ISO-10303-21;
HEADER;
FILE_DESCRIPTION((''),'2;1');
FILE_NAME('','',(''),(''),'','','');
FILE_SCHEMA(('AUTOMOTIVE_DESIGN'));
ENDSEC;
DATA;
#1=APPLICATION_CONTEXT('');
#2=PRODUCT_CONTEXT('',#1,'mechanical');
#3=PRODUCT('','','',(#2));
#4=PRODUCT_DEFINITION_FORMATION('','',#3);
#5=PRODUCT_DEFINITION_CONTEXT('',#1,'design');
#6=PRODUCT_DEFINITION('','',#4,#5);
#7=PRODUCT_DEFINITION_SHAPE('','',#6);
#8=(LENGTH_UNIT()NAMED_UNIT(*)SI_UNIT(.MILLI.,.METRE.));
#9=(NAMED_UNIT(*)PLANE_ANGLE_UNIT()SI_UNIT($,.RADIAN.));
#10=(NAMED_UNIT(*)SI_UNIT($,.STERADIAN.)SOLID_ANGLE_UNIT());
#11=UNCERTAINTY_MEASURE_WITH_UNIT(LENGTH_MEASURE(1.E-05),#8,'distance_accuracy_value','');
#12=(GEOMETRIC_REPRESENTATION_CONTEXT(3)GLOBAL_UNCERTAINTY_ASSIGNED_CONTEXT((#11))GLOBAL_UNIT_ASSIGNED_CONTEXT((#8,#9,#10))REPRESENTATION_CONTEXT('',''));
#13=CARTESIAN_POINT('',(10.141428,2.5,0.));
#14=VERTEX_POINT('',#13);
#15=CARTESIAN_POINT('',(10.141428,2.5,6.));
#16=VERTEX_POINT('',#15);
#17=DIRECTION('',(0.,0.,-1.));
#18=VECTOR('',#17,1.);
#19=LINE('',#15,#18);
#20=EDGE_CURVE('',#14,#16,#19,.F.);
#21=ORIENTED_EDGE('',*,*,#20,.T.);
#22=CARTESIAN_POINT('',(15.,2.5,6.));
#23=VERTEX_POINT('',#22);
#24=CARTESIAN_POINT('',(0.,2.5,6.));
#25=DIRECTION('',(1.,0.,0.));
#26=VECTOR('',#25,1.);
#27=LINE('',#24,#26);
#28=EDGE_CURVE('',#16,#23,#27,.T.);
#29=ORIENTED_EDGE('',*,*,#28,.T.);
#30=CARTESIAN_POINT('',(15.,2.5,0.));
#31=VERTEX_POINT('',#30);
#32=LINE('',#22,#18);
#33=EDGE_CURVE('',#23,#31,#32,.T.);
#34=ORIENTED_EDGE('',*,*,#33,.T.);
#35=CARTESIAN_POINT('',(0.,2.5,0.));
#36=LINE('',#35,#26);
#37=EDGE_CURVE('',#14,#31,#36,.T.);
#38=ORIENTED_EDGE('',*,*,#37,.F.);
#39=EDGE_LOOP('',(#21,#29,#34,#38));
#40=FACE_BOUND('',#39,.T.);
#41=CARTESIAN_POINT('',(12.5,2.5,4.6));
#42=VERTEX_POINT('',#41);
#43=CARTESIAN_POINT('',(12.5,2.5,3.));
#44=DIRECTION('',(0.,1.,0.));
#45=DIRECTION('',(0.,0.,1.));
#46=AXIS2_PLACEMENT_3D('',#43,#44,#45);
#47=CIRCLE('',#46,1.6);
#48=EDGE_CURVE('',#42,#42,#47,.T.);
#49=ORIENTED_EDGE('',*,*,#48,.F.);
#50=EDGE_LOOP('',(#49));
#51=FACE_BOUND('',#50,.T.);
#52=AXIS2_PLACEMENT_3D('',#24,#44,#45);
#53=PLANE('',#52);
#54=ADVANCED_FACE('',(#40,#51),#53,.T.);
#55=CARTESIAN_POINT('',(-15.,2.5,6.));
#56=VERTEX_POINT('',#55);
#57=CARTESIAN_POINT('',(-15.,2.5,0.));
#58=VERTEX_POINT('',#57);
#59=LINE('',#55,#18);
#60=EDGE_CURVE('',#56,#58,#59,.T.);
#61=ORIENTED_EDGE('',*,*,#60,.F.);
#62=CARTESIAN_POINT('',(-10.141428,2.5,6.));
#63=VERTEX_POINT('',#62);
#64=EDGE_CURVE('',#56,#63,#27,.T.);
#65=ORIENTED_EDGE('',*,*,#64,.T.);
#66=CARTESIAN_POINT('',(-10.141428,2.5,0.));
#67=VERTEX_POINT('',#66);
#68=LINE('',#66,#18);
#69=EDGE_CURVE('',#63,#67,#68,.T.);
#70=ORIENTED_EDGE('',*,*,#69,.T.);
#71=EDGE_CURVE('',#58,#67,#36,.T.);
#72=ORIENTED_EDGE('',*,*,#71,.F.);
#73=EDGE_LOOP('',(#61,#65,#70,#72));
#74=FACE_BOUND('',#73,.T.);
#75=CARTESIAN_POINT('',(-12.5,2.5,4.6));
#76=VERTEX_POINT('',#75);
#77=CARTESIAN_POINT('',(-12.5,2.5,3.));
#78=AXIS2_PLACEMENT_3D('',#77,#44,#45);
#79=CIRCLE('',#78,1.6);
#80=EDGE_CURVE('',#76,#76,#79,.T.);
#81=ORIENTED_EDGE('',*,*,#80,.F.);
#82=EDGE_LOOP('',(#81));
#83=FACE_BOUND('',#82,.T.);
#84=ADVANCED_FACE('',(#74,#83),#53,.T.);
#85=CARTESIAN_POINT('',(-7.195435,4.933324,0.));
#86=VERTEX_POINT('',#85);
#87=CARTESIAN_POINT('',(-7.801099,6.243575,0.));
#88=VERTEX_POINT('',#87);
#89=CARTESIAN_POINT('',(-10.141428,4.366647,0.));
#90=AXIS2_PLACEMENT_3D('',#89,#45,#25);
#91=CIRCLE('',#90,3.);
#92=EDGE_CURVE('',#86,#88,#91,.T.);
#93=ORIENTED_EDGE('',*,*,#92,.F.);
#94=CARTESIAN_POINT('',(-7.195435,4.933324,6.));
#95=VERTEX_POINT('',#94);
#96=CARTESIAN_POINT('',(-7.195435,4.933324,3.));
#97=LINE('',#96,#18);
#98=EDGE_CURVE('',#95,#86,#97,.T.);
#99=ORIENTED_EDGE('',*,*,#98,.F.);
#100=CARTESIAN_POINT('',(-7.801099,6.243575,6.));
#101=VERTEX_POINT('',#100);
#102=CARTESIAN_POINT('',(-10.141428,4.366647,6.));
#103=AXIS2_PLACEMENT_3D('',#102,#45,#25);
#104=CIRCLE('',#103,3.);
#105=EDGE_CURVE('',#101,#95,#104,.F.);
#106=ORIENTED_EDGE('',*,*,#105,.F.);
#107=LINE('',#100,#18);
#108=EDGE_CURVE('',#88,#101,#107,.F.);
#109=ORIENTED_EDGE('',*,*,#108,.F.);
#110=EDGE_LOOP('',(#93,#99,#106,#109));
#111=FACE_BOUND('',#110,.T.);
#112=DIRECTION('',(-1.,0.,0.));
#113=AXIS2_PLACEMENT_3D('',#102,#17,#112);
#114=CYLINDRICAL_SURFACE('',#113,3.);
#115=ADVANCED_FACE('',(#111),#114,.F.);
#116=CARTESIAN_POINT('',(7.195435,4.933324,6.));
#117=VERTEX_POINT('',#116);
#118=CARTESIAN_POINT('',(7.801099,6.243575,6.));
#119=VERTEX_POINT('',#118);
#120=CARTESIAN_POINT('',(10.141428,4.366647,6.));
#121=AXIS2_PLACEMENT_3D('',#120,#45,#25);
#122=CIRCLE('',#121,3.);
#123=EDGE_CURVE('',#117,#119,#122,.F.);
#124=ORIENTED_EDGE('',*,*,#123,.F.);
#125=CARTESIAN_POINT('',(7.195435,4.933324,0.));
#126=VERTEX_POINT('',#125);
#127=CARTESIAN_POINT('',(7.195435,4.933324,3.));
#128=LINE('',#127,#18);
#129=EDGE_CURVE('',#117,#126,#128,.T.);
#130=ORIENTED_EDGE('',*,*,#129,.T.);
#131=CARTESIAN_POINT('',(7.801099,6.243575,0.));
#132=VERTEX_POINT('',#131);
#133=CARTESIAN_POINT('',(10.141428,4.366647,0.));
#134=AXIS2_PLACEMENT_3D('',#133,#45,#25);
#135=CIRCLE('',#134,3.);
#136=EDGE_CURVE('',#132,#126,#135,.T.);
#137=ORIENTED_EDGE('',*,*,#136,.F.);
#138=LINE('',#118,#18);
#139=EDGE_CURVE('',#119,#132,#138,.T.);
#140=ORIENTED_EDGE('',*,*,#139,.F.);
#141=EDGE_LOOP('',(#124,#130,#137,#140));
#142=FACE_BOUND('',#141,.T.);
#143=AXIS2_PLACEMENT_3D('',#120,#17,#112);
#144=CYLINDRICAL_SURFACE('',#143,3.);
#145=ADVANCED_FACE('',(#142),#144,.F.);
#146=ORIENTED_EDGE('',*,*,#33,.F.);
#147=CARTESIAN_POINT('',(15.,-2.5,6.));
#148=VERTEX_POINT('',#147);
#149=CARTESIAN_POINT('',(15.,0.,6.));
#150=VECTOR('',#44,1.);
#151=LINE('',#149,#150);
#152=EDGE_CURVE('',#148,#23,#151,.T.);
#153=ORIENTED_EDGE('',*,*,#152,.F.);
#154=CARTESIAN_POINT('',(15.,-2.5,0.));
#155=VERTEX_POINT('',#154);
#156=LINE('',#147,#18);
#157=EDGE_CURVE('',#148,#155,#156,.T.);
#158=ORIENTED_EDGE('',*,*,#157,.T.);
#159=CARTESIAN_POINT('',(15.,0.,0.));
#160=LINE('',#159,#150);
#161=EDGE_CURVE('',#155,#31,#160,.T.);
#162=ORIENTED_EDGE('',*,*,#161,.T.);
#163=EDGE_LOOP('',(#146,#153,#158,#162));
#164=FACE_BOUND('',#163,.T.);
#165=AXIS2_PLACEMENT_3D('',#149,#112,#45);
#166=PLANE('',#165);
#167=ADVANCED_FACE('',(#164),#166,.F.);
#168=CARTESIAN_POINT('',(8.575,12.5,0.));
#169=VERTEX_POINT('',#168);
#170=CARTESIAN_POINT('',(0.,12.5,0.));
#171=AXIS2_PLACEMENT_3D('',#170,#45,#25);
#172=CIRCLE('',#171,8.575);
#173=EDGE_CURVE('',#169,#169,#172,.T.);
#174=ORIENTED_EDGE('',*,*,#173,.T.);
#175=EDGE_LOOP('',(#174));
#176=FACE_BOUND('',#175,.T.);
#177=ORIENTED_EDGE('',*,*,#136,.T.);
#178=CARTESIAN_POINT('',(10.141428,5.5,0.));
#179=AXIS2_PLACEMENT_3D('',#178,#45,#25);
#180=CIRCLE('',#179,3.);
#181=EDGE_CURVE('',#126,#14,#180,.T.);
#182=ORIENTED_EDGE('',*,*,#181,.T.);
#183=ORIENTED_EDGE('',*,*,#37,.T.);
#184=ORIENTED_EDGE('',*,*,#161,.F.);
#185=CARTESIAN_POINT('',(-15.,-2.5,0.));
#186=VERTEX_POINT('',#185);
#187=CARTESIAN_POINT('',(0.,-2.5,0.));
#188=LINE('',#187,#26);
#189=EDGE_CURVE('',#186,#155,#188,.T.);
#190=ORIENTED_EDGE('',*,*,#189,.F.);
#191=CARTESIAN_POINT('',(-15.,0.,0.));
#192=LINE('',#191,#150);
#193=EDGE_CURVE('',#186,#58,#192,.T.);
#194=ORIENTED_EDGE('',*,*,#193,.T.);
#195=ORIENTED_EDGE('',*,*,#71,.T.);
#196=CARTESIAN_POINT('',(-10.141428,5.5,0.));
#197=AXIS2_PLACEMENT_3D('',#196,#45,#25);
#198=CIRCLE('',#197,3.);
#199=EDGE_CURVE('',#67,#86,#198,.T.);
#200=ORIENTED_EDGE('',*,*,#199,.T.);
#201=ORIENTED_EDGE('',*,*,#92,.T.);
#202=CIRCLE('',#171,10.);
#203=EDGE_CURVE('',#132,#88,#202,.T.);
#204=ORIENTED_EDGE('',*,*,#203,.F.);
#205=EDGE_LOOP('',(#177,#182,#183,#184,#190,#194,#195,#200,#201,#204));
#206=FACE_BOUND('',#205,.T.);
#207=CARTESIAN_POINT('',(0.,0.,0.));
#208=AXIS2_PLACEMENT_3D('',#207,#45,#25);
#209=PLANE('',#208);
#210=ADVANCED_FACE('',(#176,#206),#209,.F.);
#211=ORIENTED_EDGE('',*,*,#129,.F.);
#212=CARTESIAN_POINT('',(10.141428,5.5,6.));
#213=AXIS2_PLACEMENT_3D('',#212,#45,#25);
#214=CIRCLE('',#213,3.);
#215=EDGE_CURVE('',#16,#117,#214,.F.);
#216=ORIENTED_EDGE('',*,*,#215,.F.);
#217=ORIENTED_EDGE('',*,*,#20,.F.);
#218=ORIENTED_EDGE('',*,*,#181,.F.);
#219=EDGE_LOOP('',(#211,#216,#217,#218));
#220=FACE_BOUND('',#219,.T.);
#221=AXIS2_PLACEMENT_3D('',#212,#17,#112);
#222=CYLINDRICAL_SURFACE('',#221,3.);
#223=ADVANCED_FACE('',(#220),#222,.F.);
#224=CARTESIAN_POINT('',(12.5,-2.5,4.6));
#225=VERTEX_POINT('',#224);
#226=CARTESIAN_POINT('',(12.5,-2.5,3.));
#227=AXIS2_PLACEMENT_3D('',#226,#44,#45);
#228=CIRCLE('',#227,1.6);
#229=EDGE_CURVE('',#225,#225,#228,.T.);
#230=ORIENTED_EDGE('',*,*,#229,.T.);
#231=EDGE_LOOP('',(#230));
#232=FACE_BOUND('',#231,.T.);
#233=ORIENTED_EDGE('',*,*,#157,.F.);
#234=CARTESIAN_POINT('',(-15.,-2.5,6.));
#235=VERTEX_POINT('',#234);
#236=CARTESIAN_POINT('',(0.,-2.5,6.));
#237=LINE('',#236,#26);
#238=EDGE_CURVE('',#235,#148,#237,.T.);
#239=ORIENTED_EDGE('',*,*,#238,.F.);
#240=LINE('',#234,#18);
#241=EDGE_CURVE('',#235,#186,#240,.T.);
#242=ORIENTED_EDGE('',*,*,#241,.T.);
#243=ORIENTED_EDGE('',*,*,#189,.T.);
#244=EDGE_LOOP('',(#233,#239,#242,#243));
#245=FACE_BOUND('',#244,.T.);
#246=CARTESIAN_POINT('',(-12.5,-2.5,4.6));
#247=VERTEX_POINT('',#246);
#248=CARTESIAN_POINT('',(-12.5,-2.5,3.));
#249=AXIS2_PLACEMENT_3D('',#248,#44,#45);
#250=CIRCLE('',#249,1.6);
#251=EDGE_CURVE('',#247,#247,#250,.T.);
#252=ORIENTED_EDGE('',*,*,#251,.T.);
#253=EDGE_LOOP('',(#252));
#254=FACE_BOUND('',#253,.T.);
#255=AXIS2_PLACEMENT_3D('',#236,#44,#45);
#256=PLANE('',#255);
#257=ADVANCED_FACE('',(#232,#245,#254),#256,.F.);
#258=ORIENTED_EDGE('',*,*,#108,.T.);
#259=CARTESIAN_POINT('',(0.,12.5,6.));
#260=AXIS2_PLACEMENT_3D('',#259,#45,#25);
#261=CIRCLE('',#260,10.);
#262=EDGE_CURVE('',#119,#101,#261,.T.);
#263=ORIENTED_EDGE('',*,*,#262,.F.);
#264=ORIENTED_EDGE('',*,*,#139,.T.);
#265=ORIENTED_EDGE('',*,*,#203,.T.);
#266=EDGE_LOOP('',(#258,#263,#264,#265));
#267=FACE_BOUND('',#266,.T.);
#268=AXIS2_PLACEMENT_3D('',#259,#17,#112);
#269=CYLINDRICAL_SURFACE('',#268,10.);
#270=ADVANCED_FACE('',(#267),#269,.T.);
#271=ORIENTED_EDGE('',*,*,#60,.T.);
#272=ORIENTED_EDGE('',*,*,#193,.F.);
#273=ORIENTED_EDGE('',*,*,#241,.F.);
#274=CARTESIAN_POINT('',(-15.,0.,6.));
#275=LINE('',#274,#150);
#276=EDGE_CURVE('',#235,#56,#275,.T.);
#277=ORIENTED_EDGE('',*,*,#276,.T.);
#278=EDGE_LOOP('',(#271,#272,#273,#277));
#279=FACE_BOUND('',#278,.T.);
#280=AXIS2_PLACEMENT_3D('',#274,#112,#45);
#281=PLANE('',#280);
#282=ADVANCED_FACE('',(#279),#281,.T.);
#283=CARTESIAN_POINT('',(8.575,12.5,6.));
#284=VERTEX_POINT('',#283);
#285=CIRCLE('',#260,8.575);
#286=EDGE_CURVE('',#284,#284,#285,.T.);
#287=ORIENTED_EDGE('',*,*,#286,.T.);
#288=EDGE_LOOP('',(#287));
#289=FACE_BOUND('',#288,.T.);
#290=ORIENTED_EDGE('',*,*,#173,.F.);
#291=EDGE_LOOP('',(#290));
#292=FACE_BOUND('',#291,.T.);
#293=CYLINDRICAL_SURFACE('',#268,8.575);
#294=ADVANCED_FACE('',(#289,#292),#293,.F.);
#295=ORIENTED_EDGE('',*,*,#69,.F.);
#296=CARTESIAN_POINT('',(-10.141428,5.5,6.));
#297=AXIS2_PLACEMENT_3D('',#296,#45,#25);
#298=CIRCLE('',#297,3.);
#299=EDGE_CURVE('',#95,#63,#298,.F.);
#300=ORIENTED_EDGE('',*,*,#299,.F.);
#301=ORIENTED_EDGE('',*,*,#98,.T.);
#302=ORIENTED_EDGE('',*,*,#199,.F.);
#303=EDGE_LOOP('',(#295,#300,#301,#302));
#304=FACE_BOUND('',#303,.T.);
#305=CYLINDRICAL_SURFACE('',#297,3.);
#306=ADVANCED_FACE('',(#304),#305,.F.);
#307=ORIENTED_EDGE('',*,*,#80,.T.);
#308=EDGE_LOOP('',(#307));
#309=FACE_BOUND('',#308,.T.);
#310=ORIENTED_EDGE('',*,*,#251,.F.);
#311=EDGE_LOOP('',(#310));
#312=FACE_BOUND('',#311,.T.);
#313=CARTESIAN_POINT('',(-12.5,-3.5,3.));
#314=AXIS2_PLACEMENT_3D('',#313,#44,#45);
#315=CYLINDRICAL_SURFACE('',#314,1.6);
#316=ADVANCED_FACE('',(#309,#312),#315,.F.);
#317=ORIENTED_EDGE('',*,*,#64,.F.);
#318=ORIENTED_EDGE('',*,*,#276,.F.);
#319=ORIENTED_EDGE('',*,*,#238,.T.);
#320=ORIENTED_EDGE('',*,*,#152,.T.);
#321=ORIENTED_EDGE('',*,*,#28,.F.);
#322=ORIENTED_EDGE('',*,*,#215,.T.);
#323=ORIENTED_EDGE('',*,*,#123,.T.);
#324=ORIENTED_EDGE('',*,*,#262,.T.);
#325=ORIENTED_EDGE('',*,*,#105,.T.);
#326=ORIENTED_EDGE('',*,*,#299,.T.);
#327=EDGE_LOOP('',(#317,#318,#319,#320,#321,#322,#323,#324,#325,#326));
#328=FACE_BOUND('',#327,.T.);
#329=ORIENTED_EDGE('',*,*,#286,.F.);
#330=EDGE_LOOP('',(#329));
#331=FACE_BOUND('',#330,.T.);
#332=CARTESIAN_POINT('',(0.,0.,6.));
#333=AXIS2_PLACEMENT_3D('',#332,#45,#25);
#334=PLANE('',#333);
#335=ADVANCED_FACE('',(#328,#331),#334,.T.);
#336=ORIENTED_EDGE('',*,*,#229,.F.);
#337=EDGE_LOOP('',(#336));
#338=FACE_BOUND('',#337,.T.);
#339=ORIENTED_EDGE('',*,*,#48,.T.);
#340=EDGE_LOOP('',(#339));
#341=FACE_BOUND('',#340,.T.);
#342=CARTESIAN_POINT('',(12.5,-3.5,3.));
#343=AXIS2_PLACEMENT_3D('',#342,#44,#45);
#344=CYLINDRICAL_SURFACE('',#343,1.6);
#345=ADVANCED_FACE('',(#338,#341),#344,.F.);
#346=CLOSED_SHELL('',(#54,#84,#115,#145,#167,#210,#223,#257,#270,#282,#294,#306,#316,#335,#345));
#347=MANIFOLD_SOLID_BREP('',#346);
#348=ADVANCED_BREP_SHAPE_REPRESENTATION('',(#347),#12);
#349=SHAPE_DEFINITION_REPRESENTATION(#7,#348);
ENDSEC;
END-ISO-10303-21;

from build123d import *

# Parameters (mm, degrees)
IZIM1_R                     = 10
IZIM1_R_2                   = 8.575
IZIM1_W                     = 30
IZIM1_H                     = 5
Y_KSEKLIK_EKSTR_ZYON1_DEPTH = 6
RADYUS1_R                   = 3
IZIM3_R                     = 1.6
KES_EKSTR_ZYON1_DEPTH       = 6
IZIM2_R                     = 1.6
KES_EKSTR_ZYON2_DEPTH       = 6


with BuildPart() as part:
    # Çizim1 → Yükseklik-Ekstrüzyon1 (new body)
    # profile 1 of 4: a face of its own
    with BuildSketch(Plane.XY):
        with Locations((0, 12.5)):
            Circle(IZIM1_R)
        with Locations((0, 12.5)):
            Circle(IZIM1_R_2, mode=Mode.SUBTRACT)
    # profile 2 of 4: a face of its own
    with BuildSketch(Plane.XY):
        with BuildLine():
            ThreePointArc((7.141428429, 5.5), (3.872983346, 3.280455543), (0, 2.5))
            Line((0, 2.5), (7.141428429, 2.5))
            Line((7.141428429, 2.5), (7.141428429, 5.5))
        make_face()
    # profile 3 of 4: a face of its own
    with BuildSketch(Plane.XY):
        with BuildLine():
            Line((-7.141428429, 5.5), (-7.141428429, 2.5))
            Line((-7.141428429, 2.5), (0, 2.5))
            ThreePointArc((0, 2.5), (-3.872983346, 3.280455543), (-7.141428429, 5.5))
        make_face()
    # profile 4 of 4: a face of its own
    with BuildSketch(Plane.XY):
        Rectangle(IZIM1_W, IZIM1_H)
    extrude(amount=Y_KSEKLIK_EKSTR_ZYON1_DEPTH)

    # Radyus1
    # the kernel refuses this fillet: 3 mm, written as the material it adds along each edge
    with BuildSketch(Plane(origin=(-7.141428429, 2.5, 0), x_dir=(-1, 0, 0), z_dir=(0, 0, 1))) as radyus1_piece_1:
        with BuildLine():
            CenterArc((RADYUS1_R, -RADYUS1_R), RADYUS1_R, 90, 90)
            Line((0, -RADYUS1_R), (0, 0))
            Line((0, 0), (RADYUS1_R, 0))
        make_face()
    extrude(amount=6)
    with BuildSketch(Plane(origin=(-7.141428429, 5.5, 0), x_dir=(0, -1, 0), z_dir=(0, 0, 1))) as radyus1_piece_2:
        with BuildLine():
            CenterArc((1.133352902, -3), RADYUS1_R, 90, 38.729363069)
            ThreePointArc((-0.743574691, -0.659670363), (-0.363585739, -0.33907996), (0, 0))
            Line((0, 0), (1.133352902, 0))
        make_face()
    extrude(amount=6)
    with BuildSketch(Plane(origin=(7.141428429, 5.5, 0), x_dir=(0, -1, 0), z_dir=(0, 0, 1))) as radyus1_piece_3:
        with BuildLine():
            CenterArc((1.133352902, 3), RADYUS1_R, 231.270636931, 38.729363069)
            ThreePointArc((-0.743574691, 0.659670363), (-0.363585739, 0.33907996), (0, 0))
            Line((0, 0), (1.133352902, 0))
        make_face()
    extrude(amount=6)
    with BuildSketch(Plane(origin=(7.141428429, 2.5, 0), x_dir=(1, 0, 0), z_dir=(0, 0, 1))) as radyus1_piece_4:
        with BuildLine():
            CenterArc((RADYUS1_R, RADYUS1_R), RADYUS1_R, 180, 90)
            Line((0, RADYUS1_R), (0, 0))
            Line((0, 0), (RADYUS1_R, 0))
        make_face()
    extrude(amount=6)

    # Çizim3 → Kes-Ekstrüzyon1 (cut)
    with BuildSketch(Plane(origin=(0, 2.5, 0), x_dir=(1, 0, 0), z_dir=(0, 1, 0))):
        with Locations(Location((12.5, -3, 0), (0, 0, 270))):
            Circle(IZIM3_R)
    extrude(amount=-KES_EKSTR_ZYON1_DEPTH, mode=Mode.SUBTRACT)

    # Çizim2 → Kes-Ekstrüzyon2 (cut)
    with BuildSketch(Plane(origin=(0, 2.5, 0), x_dir=(1, 0, 0), z_dir=(0, 1, 0))):
        with Locations(Location((-12.5, -3, 0), (0, 0, 270))):
            Circle(IZIM2_R)
    extrude(amount=-KES_EKSTR_ZYON2_DEPTH, mode=Mode.SUBTRACT)


solid = part.part
